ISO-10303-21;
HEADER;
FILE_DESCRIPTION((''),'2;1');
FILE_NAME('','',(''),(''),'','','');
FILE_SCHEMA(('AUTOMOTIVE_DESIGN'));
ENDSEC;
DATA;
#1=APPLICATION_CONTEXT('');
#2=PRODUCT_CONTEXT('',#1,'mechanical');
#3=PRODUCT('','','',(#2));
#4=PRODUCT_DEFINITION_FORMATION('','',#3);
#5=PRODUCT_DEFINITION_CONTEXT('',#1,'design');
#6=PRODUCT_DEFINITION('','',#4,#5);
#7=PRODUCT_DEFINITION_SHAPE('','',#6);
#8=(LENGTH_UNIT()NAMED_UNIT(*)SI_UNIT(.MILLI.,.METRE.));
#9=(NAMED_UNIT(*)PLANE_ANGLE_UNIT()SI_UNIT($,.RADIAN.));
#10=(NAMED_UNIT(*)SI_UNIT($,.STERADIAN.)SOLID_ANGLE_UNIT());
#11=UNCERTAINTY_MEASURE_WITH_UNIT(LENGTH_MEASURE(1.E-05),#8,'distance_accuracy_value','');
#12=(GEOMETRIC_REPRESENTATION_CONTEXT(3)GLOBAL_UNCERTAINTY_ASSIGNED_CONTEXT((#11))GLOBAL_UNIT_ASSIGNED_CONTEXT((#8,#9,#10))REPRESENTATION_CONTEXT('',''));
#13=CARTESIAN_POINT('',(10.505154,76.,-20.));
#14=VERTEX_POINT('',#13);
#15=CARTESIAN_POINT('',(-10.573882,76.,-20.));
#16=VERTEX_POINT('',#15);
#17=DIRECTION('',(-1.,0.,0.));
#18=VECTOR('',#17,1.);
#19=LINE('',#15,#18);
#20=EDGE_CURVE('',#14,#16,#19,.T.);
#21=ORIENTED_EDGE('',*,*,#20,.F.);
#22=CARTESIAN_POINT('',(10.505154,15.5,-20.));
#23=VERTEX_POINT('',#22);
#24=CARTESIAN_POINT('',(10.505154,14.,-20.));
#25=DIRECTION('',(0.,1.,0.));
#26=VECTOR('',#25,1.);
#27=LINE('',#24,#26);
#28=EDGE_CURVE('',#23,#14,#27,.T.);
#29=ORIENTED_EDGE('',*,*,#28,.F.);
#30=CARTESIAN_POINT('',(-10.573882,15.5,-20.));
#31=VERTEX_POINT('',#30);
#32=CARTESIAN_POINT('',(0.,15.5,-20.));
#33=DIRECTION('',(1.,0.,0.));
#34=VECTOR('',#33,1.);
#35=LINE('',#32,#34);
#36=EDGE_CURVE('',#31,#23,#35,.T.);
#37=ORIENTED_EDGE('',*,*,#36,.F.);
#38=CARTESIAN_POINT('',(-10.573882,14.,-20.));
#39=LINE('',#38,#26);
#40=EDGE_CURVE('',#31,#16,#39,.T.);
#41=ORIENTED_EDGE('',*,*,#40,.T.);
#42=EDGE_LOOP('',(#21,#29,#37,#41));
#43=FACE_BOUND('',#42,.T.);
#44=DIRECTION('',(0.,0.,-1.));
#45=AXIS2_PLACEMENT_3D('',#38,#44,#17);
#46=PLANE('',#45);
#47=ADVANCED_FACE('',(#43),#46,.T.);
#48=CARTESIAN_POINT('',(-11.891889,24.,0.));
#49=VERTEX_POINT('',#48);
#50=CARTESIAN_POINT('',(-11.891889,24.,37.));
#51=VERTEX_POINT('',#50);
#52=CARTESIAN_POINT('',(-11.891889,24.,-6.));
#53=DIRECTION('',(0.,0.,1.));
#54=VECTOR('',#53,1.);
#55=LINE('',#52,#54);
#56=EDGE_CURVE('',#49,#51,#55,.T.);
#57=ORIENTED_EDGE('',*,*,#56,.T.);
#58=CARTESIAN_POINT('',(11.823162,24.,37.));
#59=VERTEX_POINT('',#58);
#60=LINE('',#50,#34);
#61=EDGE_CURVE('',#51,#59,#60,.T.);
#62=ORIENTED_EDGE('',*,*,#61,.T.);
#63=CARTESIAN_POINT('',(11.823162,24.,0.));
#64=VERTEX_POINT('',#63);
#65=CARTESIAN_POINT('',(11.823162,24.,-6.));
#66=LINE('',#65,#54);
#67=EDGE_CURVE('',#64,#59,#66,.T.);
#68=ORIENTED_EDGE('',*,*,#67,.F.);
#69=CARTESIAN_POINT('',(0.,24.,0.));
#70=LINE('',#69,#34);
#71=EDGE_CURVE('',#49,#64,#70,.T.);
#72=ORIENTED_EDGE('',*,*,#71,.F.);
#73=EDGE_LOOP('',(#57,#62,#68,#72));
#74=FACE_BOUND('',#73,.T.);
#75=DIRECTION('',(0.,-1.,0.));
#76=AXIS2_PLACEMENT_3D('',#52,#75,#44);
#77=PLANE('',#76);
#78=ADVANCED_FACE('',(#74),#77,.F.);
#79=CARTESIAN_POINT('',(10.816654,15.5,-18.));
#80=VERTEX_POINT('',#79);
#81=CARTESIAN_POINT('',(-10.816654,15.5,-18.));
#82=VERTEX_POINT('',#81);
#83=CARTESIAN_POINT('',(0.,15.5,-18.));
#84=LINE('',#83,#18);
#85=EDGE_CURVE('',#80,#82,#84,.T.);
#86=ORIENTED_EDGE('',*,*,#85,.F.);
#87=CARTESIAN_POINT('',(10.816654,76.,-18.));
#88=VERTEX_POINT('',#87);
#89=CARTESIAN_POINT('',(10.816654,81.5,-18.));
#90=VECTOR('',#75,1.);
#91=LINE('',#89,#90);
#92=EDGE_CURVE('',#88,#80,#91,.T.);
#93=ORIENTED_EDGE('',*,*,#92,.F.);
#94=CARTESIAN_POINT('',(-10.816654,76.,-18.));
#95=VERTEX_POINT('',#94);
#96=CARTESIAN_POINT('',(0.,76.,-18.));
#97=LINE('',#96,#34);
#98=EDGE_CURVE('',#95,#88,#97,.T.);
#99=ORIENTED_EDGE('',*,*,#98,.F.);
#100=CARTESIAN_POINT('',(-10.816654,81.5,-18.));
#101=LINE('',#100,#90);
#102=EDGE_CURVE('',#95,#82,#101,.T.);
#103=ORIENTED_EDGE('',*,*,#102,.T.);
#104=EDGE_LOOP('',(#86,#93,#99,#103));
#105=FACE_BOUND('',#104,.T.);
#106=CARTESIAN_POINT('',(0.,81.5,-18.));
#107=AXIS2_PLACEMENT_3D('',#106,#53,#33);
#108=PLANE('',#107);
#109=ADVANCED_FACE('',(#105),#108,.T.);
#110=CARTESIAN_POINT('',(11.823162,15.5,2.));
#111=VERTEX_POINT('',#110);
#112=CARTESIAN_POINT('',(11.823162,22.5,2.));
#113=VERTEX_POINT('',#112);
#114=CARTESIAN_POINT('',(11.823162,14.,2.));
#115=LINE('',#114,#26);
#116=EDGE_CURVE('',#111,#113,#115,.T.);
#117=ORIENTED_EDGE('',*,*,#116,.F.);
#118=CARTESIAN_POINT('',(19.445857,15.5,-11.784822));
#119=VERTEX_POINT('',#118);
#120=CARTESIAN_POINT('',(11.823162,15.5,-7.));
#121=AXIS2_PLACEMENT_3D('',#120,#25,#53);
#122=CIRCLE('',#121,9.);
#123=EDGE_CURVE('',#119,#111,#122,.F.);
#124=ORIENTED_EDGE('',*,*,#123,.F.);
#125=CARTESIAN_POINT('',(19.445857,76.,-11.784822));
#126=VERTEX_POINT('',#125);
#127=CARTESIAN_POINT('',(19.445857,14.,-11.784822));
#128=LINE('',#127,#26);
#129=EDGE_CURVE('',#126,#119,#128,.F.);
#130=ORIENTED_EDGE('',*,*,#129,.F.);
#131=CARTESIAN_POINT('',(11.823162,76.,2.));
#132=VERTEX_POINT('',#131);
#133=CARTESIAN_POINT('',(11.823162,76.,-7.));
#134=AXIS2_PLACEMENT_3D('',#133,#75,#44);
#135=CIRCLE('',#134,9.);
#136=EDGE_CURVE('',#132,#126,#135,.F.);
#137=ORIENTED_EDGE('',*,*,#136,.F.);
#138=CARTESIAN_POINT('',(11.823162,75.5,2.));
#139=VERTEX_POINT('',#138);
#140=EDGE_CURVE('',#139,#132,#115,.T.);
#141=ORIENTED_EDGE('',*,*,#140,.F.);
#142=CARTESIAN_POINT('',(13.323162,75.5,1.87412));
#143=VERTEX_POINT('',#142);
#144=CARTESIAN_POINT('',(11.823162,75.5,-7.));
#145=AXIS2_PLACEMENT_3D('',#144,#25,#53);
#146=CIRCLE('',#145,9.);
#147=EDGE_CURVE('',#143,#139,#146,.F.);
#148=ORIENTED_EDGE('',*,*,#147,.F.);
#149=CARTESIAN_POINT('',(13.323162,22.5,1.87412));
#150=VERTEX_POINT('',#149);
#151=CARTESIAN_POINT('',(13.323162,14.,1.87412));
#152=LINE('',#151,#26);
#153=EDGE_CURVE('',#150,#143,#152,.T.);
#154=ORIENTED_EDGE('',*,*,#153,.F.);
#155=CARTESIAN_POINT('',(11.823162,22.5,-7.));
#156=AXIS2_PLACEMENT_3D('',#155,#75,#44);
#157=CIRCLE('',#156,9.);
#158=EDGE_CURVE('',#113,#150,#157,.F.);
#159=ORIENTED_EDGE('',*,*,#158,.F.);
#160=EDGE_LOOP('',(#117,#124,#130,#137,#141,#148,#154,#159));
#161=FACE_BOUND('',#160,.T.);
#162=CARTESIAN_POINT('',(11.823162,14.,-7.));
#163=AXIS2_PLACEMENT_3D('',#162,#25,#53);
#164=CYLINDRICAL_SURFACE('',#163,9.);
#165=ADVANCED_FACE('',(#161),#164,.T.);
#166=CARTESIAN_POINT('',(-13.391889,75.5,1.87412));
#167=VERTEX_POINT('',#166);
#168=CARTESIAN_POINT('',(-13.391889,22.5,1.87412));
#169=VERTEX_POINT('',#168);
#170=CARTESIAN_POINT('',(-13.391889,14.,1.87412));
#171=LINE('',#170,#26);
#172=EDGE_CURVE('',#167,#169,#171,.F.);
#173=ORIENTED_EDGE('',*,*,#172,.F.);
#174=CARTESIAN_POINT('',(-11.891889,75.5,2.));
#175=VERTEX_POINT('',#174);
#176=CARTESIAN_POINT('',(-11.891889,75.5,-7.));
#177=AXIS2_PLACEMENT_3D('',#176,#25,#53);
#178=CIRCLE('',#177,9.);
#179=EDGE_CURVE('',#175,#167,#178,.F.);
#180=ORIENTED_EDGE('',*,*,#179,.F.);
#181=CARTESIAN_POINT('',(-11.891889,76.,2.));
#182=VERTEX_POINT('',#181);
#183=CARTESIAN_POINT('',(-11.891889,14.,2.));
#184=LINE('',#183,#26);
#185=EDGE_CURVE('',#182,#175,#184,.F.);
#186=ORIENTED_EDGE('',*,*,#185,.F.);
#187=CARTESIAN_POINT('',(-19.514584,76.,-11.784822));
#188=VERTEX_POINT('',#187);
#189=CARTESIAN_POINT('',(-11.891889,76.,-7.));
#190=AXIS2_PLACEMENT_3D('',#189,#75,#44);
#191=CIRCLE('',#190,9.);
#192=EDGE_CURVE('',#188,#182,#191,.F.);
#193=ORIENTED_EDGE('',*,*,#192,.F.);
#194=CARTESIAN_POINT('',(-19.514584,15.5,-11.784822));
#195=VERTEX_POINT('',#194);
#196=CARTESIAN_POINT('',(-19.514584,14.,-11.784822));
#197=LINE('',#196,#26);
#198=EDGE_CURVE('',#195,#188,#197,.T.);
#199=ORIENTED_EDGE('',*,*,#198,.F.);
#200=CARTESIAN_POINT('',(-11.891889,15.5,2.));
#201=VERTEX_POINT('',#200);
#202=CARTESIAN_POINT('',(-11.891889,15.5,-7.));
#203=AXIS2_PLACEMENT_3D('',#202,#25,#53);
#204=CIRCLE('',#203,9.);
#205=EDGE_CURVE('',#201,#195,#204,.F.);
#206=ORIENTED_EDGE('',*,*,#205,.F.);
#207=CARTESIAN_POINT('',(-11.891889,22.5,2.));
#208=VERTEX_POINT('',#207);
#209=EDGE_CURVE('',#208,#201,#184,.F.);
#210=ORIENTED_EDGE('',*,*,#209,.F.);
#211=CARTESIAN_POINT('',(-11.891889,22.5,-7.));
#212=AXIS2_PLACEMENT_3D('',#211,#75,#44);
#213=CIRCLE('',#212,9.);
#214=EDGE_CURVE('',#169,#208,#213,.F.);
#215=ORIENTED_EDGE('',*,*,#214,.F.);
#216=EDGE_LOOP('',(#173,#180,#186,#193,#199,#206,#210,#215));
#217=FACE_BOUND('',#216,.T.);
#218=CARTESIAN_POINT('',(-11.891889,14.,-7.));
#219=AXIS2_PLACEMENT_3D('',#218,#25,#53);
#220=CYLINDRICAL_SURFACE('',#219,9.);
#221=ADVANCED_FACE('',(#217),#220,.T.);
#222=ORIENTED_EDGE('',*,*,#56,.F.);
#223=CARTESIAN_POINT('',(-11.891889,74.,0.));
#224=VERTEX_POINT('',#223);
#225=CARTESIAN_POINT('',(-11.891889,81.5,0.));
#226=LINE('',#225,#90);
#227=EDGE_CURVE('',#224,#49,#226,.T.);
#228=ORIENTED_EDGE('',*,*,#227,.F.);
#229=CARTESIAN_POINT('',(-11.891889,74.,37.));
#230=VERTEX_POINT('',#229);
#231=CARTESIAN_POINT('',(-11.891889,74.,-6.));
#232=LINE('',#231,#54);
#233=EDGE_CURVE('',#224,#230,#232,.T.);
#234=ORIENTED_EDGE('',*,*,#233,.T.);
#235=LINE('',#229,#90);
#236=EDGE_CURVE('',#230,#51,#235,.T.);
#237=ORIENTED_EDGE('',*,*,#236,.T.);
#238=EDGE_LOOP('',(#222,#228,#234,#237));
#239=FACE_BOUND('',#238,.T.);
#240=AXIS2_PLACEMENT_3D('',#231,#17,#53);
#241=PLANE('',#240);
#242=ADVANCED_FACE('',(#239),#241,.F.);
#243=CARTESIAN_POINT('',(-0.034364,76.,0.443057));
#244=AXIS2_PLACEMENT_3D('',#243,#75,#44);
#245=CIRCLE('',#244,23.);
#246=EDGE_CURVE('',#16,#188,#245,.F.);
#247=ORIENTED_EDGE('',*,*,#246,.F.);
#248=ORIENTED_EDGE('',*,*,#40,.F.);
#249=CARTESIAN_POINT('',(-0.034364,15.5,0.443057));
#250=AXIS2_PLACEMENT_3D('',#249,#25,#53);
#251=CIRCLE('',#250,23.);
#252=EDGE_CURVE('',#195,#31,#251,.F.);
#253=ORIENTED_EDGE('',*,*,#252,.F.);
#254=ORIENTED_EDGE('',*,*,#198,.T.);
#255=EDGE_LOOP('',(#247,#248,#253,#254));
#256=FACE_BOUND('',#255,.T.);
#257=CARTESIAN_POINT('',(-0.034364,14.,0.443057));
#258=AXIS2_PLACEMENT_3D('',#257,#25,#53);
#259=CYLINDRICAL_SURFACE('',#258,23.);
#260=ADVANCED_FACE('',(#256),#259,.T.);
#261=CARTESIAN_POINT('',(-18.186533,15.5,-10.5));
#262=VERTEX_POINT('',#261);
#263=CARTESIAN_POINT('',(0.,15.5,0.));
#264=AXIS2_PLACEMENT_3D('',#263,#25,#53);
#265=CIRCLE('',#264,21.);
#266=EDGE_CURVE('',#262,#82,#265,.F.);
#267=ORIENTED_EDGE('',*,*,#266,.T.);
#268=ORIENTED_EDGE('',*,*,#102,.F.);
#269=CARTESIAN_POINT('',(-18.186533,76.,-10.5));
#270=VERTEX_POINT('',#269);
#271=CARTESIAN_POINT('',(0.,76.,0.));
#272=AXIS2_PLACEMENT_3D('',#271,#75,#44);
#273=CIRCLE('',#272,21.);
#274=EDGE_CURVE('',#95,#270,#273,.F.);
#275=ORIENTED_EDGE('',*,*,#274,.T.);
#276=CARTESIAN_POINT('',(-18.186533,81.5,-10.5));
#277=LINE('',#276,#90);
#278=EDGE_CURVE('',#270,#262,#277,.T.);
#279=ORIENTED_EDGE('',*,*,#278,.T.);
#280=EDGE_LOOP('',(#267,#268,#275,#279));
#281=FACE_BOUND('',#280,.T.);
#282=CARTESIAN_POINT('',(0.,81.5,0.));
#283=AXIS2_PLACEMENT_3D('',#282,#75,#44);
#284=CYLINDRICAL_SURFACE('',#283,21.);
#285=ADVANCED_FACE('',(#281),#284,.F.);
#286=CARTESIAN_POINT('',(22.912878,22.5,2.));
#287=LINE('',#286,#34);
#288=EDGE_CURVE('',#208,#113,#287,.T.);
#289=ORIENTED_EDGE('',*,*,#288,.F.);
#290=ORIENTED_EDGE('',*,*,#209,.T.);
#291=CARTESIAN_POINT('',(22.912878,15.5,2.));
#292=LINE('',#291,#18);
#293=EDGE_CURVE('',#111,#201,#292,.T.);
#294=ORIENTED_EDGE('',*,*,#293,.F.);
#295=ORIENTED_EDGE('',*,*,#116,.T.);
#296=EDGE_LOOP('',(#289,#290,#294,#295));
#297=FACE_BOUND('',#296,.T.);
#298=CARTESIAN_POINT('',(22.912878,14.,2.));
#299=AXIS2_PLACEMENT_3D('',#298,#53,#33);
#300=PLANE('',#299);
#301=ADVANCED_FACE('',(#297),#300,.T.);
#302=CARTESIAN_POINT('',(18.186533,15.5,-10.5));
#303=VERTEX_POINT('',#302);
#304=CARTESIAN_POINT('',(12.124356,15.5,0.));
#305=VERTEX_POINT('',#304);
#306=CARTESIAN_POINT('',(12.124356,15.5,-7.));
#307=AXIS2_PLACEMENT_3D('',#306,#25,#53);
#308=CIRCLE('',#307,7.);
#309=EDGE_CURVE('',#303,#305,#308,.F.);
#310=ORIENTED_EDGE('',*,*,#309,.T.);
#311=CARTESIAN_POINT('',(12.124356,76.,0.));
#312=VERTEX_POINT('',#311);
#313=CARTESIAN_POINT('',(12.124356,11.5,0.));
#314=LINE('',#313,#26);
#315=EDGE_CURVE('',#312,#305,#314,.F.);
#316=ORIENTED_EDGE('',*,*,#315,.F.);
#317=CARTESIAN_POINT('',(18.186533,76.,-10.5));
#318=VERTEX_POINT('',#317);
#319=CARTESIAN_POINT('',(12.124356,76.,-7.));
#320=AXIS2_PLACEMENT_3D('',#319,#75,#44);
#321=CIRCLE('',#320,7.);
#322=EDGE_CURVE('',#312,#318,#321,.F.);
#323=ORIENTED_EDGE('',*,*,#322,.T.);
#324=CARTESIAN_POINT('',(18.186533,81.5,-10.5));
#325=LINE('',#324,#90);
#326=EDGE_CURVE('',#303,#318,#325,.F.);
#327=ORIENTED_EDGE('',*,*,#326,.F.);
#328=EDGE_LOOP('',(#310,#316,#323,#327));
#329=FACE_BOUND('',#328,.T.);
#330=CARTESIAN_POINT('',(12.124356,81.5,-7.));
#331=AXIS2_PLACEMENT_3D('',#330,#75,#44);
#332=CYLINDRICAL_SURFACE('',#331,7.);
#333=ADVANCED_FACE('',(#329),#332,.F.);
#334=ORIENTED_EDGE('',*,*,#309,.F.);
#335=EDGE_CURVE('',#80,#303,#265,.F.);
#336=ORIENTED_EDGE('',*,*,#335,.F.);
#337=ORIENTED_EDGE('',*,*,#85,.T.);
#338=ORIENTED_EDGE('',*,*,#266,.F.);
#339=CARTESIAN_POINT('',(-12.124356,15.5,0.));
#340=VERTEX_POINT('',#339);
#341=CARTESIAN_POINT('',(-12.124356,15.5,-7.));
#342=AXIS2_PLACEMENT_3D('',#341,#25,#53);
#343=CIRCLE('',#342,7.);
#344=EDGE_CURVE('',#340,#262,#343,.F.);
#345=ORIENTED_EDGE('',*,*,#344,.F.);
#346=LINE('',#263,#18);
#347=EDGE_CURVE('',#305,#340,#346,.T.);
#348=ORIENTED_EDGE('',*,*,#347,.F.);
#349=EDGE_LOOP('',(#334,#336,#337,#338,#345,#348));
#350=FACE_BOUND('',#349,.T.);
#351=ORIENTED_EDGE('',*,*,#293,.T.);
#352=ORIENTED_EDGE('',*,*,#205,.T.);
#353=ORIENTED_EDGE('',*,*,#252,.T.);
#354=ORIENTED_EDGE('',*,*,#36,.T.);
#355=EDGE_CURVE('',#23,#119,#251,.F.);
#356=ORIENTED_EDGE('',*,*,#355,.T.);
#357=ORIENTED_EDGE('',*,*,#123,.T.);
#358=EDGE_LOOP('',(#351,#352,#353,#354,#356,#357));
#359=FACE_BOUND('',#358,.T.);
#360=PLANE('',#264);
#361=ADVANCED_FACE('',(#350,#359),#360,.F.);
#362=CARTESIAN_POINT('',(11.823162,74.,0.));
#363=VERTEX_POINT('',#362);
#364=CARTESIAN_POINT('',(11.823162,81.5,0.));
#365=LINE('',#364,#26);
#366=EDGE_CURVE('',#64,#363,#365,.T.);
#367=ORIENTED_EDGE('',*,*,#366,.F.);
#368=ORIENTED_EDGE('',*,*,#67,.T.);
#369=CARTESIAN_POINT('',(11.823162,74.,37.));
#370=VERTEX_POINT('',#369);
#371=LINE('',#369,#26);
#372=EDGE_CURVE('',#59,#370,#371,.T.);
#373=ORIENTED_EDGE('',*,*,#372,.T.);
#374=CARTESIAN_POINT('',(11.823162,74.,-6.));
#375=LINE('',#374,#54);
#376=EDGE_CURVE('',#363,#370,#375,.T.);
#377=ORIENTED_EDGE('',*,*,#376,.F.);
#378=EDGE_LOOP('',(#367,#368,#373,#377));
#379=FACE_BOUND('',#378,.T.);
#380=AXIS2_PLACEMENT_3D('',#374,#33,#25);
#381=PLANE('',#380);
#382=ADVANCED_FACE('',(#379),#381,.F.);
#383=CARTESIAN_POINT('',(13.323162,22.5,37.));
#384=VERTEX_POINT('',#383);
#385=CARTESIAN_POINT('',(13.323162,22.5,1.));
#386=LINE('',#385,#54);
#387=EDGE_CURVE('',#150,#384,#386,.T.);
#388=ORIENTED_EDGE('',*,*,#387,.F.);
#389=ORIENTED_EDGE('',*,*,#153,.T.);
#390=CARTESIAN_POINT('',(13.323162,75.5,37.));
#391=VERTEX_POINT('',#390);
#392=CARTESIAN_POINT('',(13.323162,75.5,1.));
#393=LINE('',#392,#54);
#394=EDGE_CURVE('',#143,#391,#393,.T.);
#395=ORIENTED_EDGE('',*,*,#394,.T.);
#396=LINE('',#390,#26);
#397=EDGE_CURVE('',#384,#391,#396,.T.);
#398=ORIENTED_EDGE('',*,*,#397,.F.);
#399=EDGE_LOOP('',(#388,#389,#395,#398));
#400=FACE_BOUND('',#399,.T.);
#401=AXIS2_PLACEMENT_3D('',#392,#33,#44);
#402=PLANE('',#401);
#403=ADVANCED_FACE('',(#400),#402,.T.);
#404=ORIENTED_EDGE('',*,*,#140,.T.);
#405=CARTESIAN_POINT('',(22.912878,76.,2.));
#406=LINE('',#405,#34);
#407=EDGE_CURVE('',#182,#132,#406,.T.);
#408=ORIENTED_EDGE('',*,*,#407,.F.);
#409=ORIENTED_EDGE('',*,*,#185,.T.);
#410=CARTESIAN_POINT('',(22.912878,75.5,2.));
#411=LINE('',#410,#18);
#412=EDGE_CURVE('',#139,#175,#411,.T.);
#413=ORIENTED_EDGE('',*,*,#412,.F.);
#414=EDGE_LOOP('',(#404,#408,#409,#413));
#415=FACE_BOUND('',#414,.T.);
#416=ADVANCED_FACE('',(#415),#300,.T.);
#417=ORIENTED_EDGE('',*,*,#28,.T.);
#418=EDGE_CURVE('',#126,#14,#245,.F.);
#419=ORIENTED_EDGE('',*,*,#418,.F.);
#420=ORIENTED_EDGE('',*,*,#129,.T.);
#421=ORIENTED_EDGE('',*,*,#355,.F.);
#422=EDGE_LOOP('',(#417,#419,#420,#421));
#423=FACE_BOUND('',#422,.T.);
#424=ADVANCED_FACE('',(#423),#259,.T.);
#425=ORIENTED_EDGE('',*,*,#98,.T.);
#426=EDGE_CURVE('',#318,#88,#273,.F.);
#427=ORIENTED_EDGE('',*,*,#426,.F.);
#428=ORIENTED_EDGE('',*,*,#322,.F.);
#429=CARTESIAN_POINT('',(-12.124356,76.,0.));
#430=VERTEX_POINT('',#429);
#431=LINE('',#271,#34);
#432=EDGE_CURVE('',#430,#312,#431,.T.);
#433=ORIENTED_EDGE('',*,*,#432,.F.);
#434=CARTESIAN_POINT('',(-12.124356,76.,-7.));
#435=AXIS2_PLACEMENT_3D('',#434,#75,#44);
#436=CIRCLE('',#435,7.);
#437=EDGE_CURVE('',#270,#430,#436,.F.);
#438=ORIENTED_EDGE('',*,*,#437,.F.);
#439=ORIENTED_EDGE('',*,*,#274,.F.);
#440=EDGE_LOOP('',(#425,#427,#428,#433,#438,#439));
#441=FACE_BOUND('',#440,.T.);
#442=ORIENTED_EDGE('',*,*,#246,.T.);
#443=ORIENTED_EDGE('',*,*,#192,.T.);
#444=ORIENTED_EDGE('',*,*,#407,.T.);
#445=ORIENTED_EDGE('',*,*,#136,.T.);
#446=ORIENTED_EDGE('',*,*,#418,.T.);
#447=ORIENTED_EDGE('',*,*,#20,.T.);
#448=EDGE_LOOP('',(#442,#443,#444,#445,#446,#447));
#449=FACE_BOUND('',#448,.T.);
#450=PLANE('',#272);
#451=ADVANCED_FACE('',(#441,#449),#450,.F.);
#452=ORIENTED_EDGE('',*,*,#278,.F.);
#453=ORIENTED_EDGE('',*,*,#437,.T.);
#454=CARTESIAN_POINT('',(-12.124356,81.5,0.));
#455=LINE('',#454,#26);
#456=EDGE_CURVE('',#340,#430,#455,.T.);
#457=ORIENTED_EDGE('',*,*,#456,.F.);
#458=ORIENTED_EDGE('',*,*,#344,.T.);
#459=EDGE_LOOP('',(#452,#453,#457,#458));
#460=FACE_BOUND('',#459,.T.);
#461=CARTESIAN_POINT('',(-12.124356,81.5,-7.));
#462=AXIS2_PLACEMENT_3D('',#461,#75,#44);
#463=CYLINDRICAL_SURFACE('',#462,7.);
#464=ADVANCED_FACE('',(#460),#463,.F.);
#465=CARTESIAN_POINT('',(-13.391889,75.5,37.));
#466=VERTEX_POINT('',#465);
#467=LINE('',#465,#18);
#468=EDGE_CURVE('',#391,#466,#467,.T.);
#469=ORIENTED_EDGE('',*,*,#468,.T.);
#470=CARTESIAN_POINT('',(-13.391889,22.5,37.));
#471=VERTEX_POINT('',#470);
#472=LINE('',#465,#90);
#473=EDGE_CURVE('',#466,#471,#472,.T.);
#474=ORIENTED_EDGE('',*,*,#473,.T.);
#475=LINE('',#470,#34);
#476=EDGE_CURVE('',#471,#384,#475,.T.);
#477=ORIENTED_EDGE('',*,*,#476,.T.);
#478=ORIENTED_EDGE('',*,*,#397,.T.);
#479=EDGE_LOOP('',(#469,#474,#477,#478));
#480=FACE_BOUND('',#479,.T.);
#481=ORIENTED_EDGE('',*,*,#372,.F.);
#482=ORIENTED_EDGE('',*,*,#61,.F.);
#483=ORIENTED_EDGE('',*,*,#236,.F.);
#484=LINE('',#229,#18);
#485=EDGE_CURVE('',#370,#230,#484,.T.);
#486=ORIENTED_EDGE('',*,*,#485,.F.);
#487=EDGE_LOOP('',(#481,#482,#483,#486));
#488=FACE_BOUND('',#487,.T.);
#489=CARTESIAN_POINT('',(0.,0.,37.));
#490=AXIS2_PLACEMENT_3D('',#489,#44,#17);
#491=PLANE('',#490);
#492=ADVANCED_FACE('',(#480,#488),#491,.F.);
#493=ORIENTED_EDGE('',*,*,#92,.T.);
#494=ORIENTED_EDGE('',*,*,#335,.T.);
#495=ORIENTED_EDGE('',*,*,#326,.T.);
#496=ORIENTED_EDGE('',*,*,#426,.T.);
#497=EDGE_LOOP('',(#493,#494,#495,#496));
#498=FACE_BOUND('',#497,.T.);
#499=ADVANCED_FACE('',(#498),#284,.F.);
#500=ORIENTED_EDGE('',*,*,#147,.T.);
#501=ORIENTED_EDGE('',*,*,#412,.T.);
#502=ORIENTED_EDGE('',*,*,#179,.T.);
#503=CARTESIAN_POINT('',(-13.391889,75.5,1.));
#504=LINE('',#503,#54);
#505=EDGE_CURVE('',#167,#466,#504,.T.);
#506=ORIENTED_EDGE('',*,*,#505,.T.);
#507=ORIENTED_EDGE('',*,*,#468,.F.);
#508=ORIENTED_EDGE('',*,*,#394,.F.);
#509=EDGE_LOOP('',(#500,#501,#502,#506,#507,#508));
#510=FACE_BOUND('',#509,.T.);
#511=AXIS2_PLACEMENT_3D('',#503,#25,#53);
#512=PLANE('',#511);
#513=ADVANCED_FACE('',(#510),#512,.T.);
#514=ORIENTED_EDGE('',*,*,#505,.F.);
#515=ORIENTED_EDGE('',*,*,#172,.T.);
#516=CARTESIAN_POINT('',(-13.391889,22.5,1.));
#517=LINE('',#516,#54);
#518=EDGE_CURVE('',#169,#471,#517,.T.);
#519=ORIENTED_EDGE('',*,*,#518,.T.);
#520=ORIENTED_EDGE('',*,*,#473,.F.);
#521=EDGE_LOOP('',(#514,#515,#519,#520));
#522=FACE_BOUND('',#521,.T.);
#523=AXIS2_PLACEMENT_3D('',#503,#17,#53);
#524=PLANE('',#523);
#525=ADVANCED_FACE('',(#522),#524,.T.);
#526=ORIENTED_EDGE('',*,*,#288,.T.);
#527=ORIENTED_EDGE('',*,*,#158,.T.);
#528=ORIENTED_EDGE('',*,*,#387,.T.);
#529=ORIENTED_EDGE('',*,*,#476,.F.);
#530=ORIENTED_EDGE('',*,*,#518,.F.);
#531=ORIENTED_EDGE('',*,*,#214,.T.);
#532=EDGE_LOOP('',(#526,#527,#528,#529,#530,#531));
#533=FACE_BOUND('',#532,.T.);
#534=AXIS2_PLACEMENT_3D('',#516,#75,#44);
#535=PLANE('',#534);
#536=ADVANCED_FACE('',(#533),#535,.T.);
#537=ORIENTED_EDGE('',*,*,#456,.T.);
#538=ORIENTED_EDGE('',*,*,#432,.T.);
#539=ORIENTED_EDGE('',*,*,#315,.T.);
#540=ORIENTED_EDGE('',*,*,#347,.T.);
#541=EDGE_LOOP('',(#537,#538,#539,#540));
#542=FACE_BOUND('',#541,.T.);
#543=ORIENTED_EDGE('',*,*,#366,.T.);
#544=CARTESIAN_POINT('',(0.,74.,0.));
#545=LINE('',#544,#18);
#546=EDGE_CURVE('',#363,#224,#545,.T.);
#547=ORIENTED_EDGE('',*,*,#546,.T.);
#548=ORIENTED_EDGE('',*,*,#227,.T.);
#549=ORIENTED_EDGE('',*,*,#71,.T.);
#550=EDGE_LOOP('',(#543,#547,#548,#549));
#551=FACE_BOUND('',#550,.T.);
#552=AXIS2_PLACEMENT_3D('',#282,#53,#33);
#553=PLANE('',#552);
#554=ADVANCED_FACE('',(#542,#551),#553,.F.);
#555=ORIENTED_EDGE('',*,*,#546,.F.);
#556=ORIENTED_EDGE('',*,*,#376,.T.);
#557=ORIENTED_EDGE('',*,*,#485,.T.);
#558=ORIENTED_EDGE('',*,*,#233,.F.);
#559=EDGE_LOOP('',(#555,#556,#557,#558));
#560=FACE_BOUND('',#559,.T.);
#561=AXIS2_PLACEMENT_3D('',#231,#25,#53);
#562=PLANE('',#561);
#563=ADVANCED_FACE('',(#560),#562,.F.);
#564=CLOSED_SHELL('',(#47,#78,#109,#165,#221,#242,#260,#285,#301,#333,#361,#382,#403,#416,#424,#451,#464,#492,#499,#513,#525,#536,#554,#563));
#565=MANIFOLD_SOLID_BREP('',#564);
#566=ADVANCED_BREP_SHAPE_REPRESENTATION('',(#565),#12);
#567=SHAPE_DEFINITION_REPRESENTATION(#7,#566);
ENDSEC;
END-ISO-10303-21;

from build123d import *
from build123d.topology import SkipClean

# Parameters (mm, degrees)
CUT_EXTRUDE1_DEPTH           = 5
CUT_EXTRUDE3_DEPTH           = 70
SKETCH8_R                    = 43
CUT_EXTRUDE4_DEPTH           = 65
FILLET1_R                    = 7
SKETCH12_W                   = 6.5
SKETCH12_H                   = 63.5
CUT_REVOLVE1_ANGLE           = 60
CUT_REVOLVE1_OTHER_WAY_ANGLE = 60
SKETCH18_W                   = 13
SKETCH18_H                   = 8
CUT_EXTRUDE13_DEPTH          = 5
SKETCH20_W                   = 100
SKETCH20_H                   = 7
CUT_EXTRUDE15_DEPTH          = 5
SKETCH19_R                   = 1.5
CUT_EXTRUDE14_DEPTH          = 12
FILLET3_R                    = 4
SKETCH24_W                   = 2
SKETCH24_H                   = 3
BOSS_EXTRUDE3_DEPTH          = 2
CIRPATTERN2_COUNT            = 5
SKETCH26_W                   = 5
SKETCH26_H                   = 63.5
CUT_REVOLVE2_ANGLE           = 50
CUT_REVOLVE2_OTHER_WAY_ANGLE = 50
FILLET8_R                    = 9
SKETCH50_W                   = 13
SKETCH50_H                   = 5
CUT_EXTRUDE23_DEPTH          = 7
WRAP1_SECTION_W              = 14
WRAP1_SECTION_H              = 8
WRAP1_ANGLE                  = 29.893450181
SKETCH52_W                   = 21.079035893
SKETCH52_H                   = 8
BOSS_EXTRUDE11_DEPTH         = 7
BOSS_EXTRUDE12_START         = -1
SKETCH53_W                   = 3
SKETCH53_H                   = 7
BOSS_EXTRUDE12_DEPTH         = 3
SKETCH54_W                   = 1.6
SKETCH54_H                   = 7
BOSS_EXTRUDE13_DEPTH         = 16
SKETCH55_W                   = 4
SKETCH55_H                   = 7
BOSS_EXTRUDE14_DEPTH         = 6
SKETCH56_W                   = 3
SKETCH56_H                   = 7
CUT_EXTRUDE24_DEPTH          = 1
FILLET9_R                    = 2
SKETCH57_R                   = 1
CUT_EXTRUDE25_DEPTH          = 2
MIRROR6_START                = 14.3
MIRROR6_DEPTH                = 3.544129525
MIRROR6_START_2              = 19.844129625
MIRROR6_2_DEPTH              = 1.455870375
MIRROR6_START_3              = 17.844129525
MIRROR6_3_DEPTH              = 2.0000001
MIRROR6_START_4              = -10.618295229
MIRROR6_4_OUTLINE_R          = 1
MIRROR6_4_DEPTH              = 2
SKETCH61_W                   = 1.5
SKETCH61_H                   = 40.3
BOSS_EXTRUDE15_DEPTH         = 10
SKETCH63_W                   = 6.5
SKETCH63_H                   = 40.3
CUT_EXTRUDE27_DEPTH          = 10
CUT_EXTRUDE28_DEPTH          = 44
SKETCH67_W                   = 15
SKETCH67_H                   = 8
CUT_EXTRUDE29_DEPTH          = 5
SKETCH68_W                   = 23.715050839
SKETCH68_H                   = 50
CUT_EXTRUDE30_DEPTH          = 8
BOSS_EXTRUDE19_DEPTH         = 35
BOSS_EXTRUDE19_DEPTH_BACK    = 1
SKETCH69_W                   = 26.715050839
SKETCH69_H                   = 53
SKETCH69_W_2                 = 23.715050839
SKETCH69_H_2                 = 50
INTERSECT1_START             = 76
INTERSECT1_OUTLINE_R         = 45
INTERSECT1_OUTLINE_W         = 13
INTERSECT1_OUTLINE_H         = 8
INTERSECT1_DEPTH             = 10.5
INTERSECT1_2_OUTLINE_R       = 45
INTERSECT1_2_OUTLINE_W       = 13
INTERSECT1_2_OUTLINE_H       = 5
INTERSECT1_2_OUTLINE_W_2     = 15
INTERSECT1_2_OUTLINE_H_2     = 8
INTERSECT1_2_DEPTH           = 15.5
INTERSECT1_START_2           = 15.5
INTERSECT1_3_DEPTH           = 60.5
SKETCH70_W                   = 21.079035893
SKETCH70_H                   = 7
CUT_EXTRUDE31_DEPTH          = 10


with BuildPart() as part:
    # Sketch1 → Revolve1 (revolve)
    with BuildSketch(Plane.XY, mode=Mode.PRIVATE) as revolve1_sk:
        with BuildLine():
            Line((0, 86.5), (0, 11.5))
            Line((0, 11.5), (22.7, 11.5))
            Line((22.7, 11.5), (22.7, 0))
            Line((22.7, 0), (25, 0))
            Line((25, 0), (25, 11.5))
            Line((25, 11.5), (45, 11.5))
            Line((45, 11.5), (45, 81.5))
            ThreePointArc((45, 81.5), (43.535533906, 85.035533906), (40, 86.5))
            Line((40, 86.5), (0, 86.5))
        make_face()
    revolve(revolve1_sk.sketch.rotate(Axis((0, 2, 0), (0, 1, 0)), 90), axis=Axis((0, 2, 0), (0, 1, 0)))

    # Sketch5 → Cut-Extrude1 (cut)
    with BuildSketch(Plane(origin=(0, 86.5, 0), x_dir=(1, 0, 0), z_dir=(0, 1, 0))):
        with BuildLine():
            Line((-45, 0), (45, 0))
            ThreePointArc((45, 0), (0, 45), (-45, 0))
        make_face()
    extrude(amount=-CUT_EXTRUDE1_DEPTH, mode=Mode.SUBTRACT)

    # Sketch7 → Cut-Extrude3 (cut)
    with BuildSketch(Plane.XZ.offset(-11.5)):
        with BuildLine():
            Line((21, 0), (-21, 0))
            ThreePointArc((-21, 0), (-18.277714988, -10.340461055), (-10.816653826, -18))
            Line((-10.816653826, -18), (10.816653826, -18))
            ThreePointArc((10.816653826, -18), (18.277714988, -10.340461055), (21, 0))
        make_face()
    extrude(amount=-CUT_EXTRUDE3_DEPTH, mode=Mode.SUBTRACT)

    # Sketch8 → Cut-Extrude4 (cut)
    with BuildSketch(Plane(origin=(0, 79, 0), x_dir=(1, 0, 0), z_dir=(0, 1, 0))):
        with Locations(Location((0, 0, 0), (0, 0, 270))):
            Circle(SKETCH8_R)
        with BuildLine():
            Line((22.912878475, -2), (-22.981606036, -2))
            ThreePointArc((-22.981606036, -2), (-20.067855169, 10.855581536), (-10.573881727, 20))
            Line((-10.573881727, 20), (10.505154166, 20))
            ThreePointArc((10.505154166, 20), (19.999127608, 10.855581536), (22.912878475, -2))
        make_face(mode=Mode.SUBTRACT)
    extrude(amount=-CUT_EXTRUDE4_DEPTH, mode=Mode.SUBTRACT)

    # Fillet1
    fillet1_edges = [part.edges().sort_by_distance(p)[0] for p in [
        (-21, 46.5, 0),
        (21, 46.5, 0),
    ]]
    fillet(fillet1_edges, radius=FILLET1_R)

    # Sketch12 → Cut-Revolve1 (revolve, cut)
    with BuildSketch(Plane(origin=(0, 0, 0), x_dir=(0, 0, -1), z_dir=(1, 0, 0))):
        with Locations((-44.75, 47.25)):
            Rectangle(SKETCH12_W, SKETCH12_H)
    revolve(axis=Axis((0, 81.5, 0), (0, -1, 0)), revolution_arc=CUT_REVOLVE1_ANGLE, mode=Mode.SUBTRACT)

    # Sketch12 → Cut-Revolve1 other way (revolve, cut)
    with BuildSketch(Plane(origin=(0, 0, 0), x_dir=(0, 0, -1), z_dir=(1, 0, 0))):
        with Locations((-44.75, 47.25)):
            Rectangle(SKETCH12_W, SKETCH12_H)
    revolve(axis=Axis((0, 81.5, 0), (0, 1, 0)), revolution_arc=CUT_REVOLVE1_OTHER_WAY_ANGLE, mode=Mode.SUBTRACT)

    # Sketch18 → Cut-Extrude13 (cut)
    with BuildSketch(Plane(origin=(0, 81.5, 0), x_dir=(1, 0, 0), z_dir=(0, 1, 0))):
        with Locations((0, 30)):
            Rectangle(SKETCH18_W, SKETCH18_H)
    extrude(amount=-CUT_EXTRUDE13_DEPTH, mode=Mode.SUBTRACT)

    # Sketch20 → Cut-Extrude15 (cut)
    with BuildSketch(Plane(origin=(0, 86.5, 0), x_dir=(1, 0, 0), z_dir=(0, 1, 0))):
        with Locations((0, -3.5)):
            Rectangle(SKETCH20_W, SKETCH20_H)
    extrude(amount=-CUT_EXTRUDE15_DEPTH, mode=Mode.SUBTRACT)

    # Sketch19 → Cut-Extrude14 (cut)
    with BuildSketch(Plane(origin=(0, 0, 7), x_dir=(-1, 0, 0), z_dir=(0, 0, -1))):
        with Locations((0, 84)):
            Circle(SKETCH19_R)
        with Locations((-30, 84)):
            Circle(SKETCH19_R)
        with Locations((29.452221542, 84)):
            Circle(SKETCH19_R)
    extrude(amount=-CUT_EXTRUDE14_DEPTH, mode=Mode.SUBTRACT)

    # Fillet3
    fillet3_edges = [part.edges().sort_by_distance(p)[0] for p in [
        (0, 11.5, 45),
    ]]
    fillet(fillet3_edges, radius=FILLET3_R - 0.0001)  # a hair under: the kernel refuses the full size

    # Sketch24 → Boss-Extrude3 (add)
    with BuildSketch(Plane.XZ):
        with Locations((0, -22.7)):
            Rectangle(SKETCH24_W, SKETCH24_H)
    boss_extrude3 = extrude(amount=-BOSS_EXTRUDE3_DEPTH)

    # CirPattern2: Boss-Extrude3 ×5 about axis
    cirpattern2_axis = Axis((0, 0, 0), (0, 1, 0))
    for i in range(1, CIRPATTERN2_COUNT):
        add(boss_extrude3.rotate(cirpattern2_axis, i * 360 / CIRPATTERN2_COUNT))

    # Sketch26 → Cut-Revolve2 (revolve, cut)
    with BuildSketch(Plane(origin=(0, 0, 0), x_dir=(0, 0, -1), z_dir=(1, 0, 0))):
        with Locations((45.056943441, 47.25)):
            Rectangle(SKETCH26_W, SKETCH26_H)
    revolve(axis=Axis((0, 2, 0), (0, -1, 0)), revolution_arc=CUT_REVOLVE2_ANGLE, mode=Mode.SUBTRACT)

    # Sketch26 → Cut-Revolve2 other way (revolve, cut)
    with BuildSketch(Plane(origin=(0, 0, 0), x_dir=(0, 0, -1), z_dir=(1, 0, 0))):
        with Locations((45.056943441, 47.25)):
            Rectangle(SKETCH26_W, SKETCH26_H)
    revolve(axis=Axis((0, 2, 0), (0, 1, 0)), revolution_arc=CUT_REVOLVE2_OTHER_WAY_ANGLE, mode=Mode.SUBTRACT)

    # Fillet8
    fillet8_edges = [part.edges().sort_by_distance(p)[0] for p in [
        (-22.981606036, 46.5, 2),
        (22.912878475, 46.5, 2),
    ]]
    fillet(fillet8_edges, radius=FILLET8_R)

    # Sketch50 → Cut-Extrude23 (cut)
    with BuildSketch(Plane(origin=(0, 14, 0), x_dir=(1, 0, 0), z_dir=(0, 1, 0))):
        with Locations((32, 0)):
            Rectangle(SKETCH50_W, SKETCH50_H)
        with Locations((-32, 0)):
            Rectangle(SKETCH50_W, SKETCH50_H)
    extrude(amount=-CUT_EXTRUDE23_DEPTH, mode=Mode.SUBTRACT)

    # Wrap1 section (on wrap section) → Wrap1 (revolve)
    with BuildSketch(Plane(origin=(-0.03436378, 79, 0.443056559), x_dir=(0.8417807911855657, 0, -0.5398195064936087), z_dir=(0.5398195064936087, 0, 0.8417807911855657))):
        with Locations((30, -61)):
            Rectangle(WRAP1_SECTION_W, WRAP1_SECTION_H)
    wrap1 = revolve(axis=Axis((-0.03436378, 79, 0.443056559), (0, 1, 0)), revolution_arc=WRAP1_ANGLE)

    # Mirror3: Wrap1 across plane
    add(wrap1.mirror(Plane(origin=(0, 0, 0), x_dir=(0, 0, 1), z_dir=(1, 0, 0))))

    # Sketch52 → Boss-Extrude11 (add)
    with BuildSketch(Plane(origin=(0, 0, -20), x_dir=(-1, 0, 0), z_dir=(0, 0, -1))):
        with Locations((0.03436378, 18)):
            Rectangle(SKETCH52_W, SKETCH52_H)
    extrude(amount=BOSS_EXTRUDE11_DEPTH)



with BuildPart() as body_2:
    # Sketch53 → Boss-Extrude12 (new body)
    with BuildSketch(Plane(origin=(20.823161639, 0, 0), x_dir=(0, 0, -1), z_dir=(1, 0, 0)).offset(BOSS_EXTRUDE12_START)):
        with Locations((9.818295229, 17.8)):
            Rectangle(SKETCH53_W, SKETCH53_H)
    extrude(amount=BOSS_EXTRUDE12_DEPTH)


with BuildPart() as part_1:
    add(part.part)

    add(body_2.part)  # Boss-Extrude13 merges body 2
    # Sketch54 → Boss-Extrude13 (add)
    with BuildSketch(Plane(origin=(22.823161639, 0, 0), x_dir=(0, 0, -1), z_dir=(1, 0, 0))):
        with Locations((9.818295229, 17.8)):
            Rectangle(SKETCH54_W, SKETCH54_H)
    extrude(amount=BOSS_EXTRUDE13_DEPTH)

    # Sketch55 → Boss-Extrude14 (add)
    with BuildSketch(Plane.XY.offset(-9.118295229)):
        with Locations((34.823161639, 17.8)):
            Rectangle(SKETCH55_W, SKETCH55_H)
    extrude(amount=BOSS_EXTRUDE14_DEPTH)

    # Sketch56 → Cut-Extrude24 (cut)
    with BuildSketch(Plane.XY.offset(-9.018295229)):
        with Locations((25.823161639, 17.8)):
            Rectangle(SKETCH56_W, SKETCH56_H)
    extrude(amount=-CUT_EXTRUDE24_DEPTH, mode=Mode.SUBTRACT)

    # Fillet9
    # the kernel refuses this fillet: 2 mm, written as the material it takes off along each edge
    with BuildSketch(Plane(origin=(27.323161639, 25.630127019, -9.018295229), x_dir=(0, 0, -1), z_dir=(0, -1, 0))) as fillet9_piece_1_section:
        with BuildLine():
            CenterArc((2, 1.732050808), FILLET9_R, 180, 60)
            Line((0, 1.732050808), (0, 0))
            Line((0, 0), (1, 0))
        make_face()
    fillet9_piece_1 = extrude(amount=15.660254038, mode=Mode.PRIVATE)
    fillet9_piece_1 = split(fillet9_piece_1, bisect_by=Plane(origin=(27.323161639, 14, -9.018295229), z_dir=(0, 1, 0)), keep=Keep.TOP, mode=Mode.PRIVATE)
    add(fillet9_piece_1, mode=Mode.SUBTRACT)

    # Sketch57 → Cut-Extrude25 (cut)
    with BuildSketch(Plane(origin=(0, 0, -10.618295229), x_dir=(-1, 0, 0), z_dir=(0, 0, -1))):
        with Locations(Location((-36.823161639, 18.844129625, 0), (0, 0, 90))):
            Circle(SKETCH57_R)
    extrude(amount=-CUT_EXTRUDE25_DEPTH, mode=Mode.SUBTRACT)

    # Mirror6: read off the stored shape, not the designer's step
    # Mirror6 outline → Mirror6 (add)
    with BuildSketch(Plane(origin=(0, 0, 0), x_dir=(1, 0, 0), z_dir=(0, 1, 0)).offset(MIRROR6_START)):
        with BuildLine():
            Line((-32.823161639, 9.018295229), (-29.055212446, 9.018295229))
            ThreePointArc((-29.055212446, 9.018295229), (-28.055212446, 9.286244421), (-27.323161639, 10.018295229))
            Line((-27.323161639, 10.018295229), (-24.323161639, 10.018295229))
            Line((-24.323161639, 10.018295229), (-24.323161639, 9.018295229))
            Line((-24.323161639, 9.018295229), (-22.823161639, 9.018295229))
            Line((-22.823161639, 9.018295229), (-22.823161639, 8.318295229))
            Line((-22.823161639, 8.318295229), (-20.794815555, 8.318295229))
            ThreePointArc((-20.794815555, 8.318295229), (-20.436002794, 9.828095276), (-19.823161639, 11.253812113))
            Line((-19.823161639, 11.253812113), (-19.823161639, 11.318295229))
            Line((-19.823161639, 11.318295229), (-22.823161639, 11.318295229))
            Line((-22.823161639, 11.318295229), (-22.823161639, 10.618295229))
            Line((-22.823161639, 10.618295229), (-38.823161639, 10.618295229))
            Line((-38.823161639, 10.618295229), (-38.823161639, 9.018295229))
            Line((-38.823161639, 9.018295229), (-36.823161639, 9.018295229))
            Line((-36.823161639, 9.018295229), (-36.823161639, 8.618295229))
            Line((-36.823161639, 8.618295229), (-36.823161639, 3.118295229))
            Line((-36.823161639, 3.118295229), (-32.823161639, 3.118295229))
            Line((-32.823161639, 3.118295229), (-32.823161639, 9.018295229))
        make_face()
    extrude(amount=MIRROR6_DEPTH)

    # Mirror6 2 outline → Mirror6 2 (add)
    with BuildSketch(Plane(origin=(0, 0, 0), x_dir=(1, 0, 0), z_dir=(0, 1, 0)).offset(MIRROR6_START_2)):
        with BuildLine():
            Line((-32.823161639, 9.018295229), (-29.055212446, 9.018295229))
            ThreePointArc((-29.055212446, 9.018295229), (-28.055212446, 9.286244421), (-27.323161639, 10.018295229))
            Line((-27.323161639, 10.018295229), (-24.323161639, 10.018295229))
            Line((-24.323161639, 10.018295229), (-24.323161639, 9.018295229))
            Line((-24.323161639, 9.018295229), (-22.823161639, 9.018295229))
            Line((-22.823161639, 9.018295229), (-22.823161639, 8.318295229))
            Line((-22.823161639, 8.318295229), (-20.794815555, 8.318295229))
            ThreePointArc((-20.794815555, 8.318295229), (-20.436002794, 9.828095276), (-19.823161639, 11.253812113))
            Line((-19.823161639, 11.253812113), (-19.823161639, 11.318295229))
            Line((-19.823161639, 11.318295229), (-22.823161639, 11.318295229))
            Line((-22.823161639, 11.318295229), (-22.823161639, 10.618295229))
            Line((-22.823161639, 10.618295229), (-38.823161639, 10.618295229))
            Line((-38.823161639, 10.618295229), (-38.823161639, 9.018295229))
            Line((-38.823161639, 9.018295229), (-36.823161639, 9.018295229))
            Line((-36.823161639, 9.018295229), (-36.823161639, 8.618295229))
            Line((-36.823161639, 8.618295229), (-36.823161639, 3.118295229))
            Line((-36.823161639, 3.118295229), (-32.823161639, 3.118295229))
            Line((-32.823161639, 3.118295229), (-32.823161639, 9.018295229))
        make_face()
    extrude(amount=MIRROR6_2_DEPTH)

    # Mirror6 3 outline → Mirror6 3 (add)
    with BuildSketch(Plane(origin=(0, 0, 0), x_dir=(1, 0, 0), z_dir=(0, 1, 0)).offset(MIRROR6_START_3)):
        with BuildLine():
            Line((-32.823161639, 9.018295229), (-29.055212446, 9.018295229))
            ThreePointArc((-29.055212446, 9.018295229), (-28.055212446, 9.286244421), (-27.323161639, 10.018295229))
            Line((-27.323161639, 10.018295229), (-24.323161639, 10.018295229))
            Line((-24.323161639, 10.018295229), (-24.323161639, 9.018295229))
            Line((-24.323161639, 9.018295229), (-22.823161639, 9.018295229))
            Line((-22.823161639, 9.018295229), (-22.823161639, 8.318295229))
            Line((-22.823161639, 8.318295229), (-20.794815555, 8.318295229))
            ThreePointArc((-20.794815555, 8.318295229), (-20.436002794, 9.828095276), (-19.823161639, 11.253812113))
            Line((-19.823161639, 11.253812113), (-19.823161639, 11.318295229))
            Line((-19.823161639, 11.318295229), (-22.823161639, 11.318295229))
            Line((-22.823161639, 11.318295229), (-22.823161639, 10.618295229))
            Line((-22.823161639, 10.618295229), (-38.823161639, 10.618295229))
            Line((-38.823161639, 10.618295229), (-38.823161639, 9.018295229))
            Line((-38.823161639, 9.018295229), (-36.823161639, 9.018295229))
            Line((-36.823161639, 9.018295229), (-36.823161639, 8.618295229))
            Line((-36.823161639, 8.618295229), (-36.823161639, 3.118295229))
            Line((-36.823161639, 3.118295229), (-32.823161639, 3.118295229))
            Line((-32.823161639, 3.118295229), (-32.823161639, 9.018295229))
        make_face()
    extrude(amount=MIRROR6_3_DEPTH)

    # Mirror6 4 outline → Mirror6 4 (cut)
    with BuildSketch(Plane.XY.offset(MIRROR6_START_4)):
        with Locations((-36.823161639, 18.844129625)):
            Circle(MIRROR6_4_OUTLINE_R)
    extrude(amount=MIRROR6_4_DEPTH, mode=Mode.SUBTRACT)

    # Sketch61 → Boss-Extrude15 (add)
    with BuildSketch(Plane(origin=(45, 0, 0), x_dir=(0, 0, -1), z_dir=(1, 0, 0))):
        with Locations((23.675442436, 50.15)):
            Rectangle(SKETCH61_W, SKETCH61_H)
        with Locations((15.675442436, 50.15)):
            Rectangle(SKETCH61_W, SKETCH61_H)
        Polygon((24.425442436, 30), (24.425442436, 28.5), (14.925442436, 28.5), (14.925442436, 30), (16.425442436, 30), (22.925442436, 30), align=None)
        Polygon((22.925442436, 70.3), (24.425442436, 70.3), (24.425442436, 71.8), (14.925442436, 71.8), (14.925442436, 70.3), (16.425442436, 70.3), align=None)
    extrude(amount=-BOSS_EXTRUDE15_DEPTH)

    # Sketch63 → Cut-Extrude27 (cut)
    with BuildSketch(Plane(origin=(45, 0, 0), x_dir=(0, 0, -1), z_dir=(1, 0, 0))):
        with Locations((19.675442436, 50.15)):
            Rectangle(SKETCH63_W, SKETCH63_H)
    extrude(amount=-CUT_EXTRUDE27_DEPTH, mode=Mode.SUBTRACT)

    # Sketch66 → Cut-Extrude28 (cut)
    with SkipClean():  # the faces are left unmerged after this step: merging them gives an invalid solid
        with BuildSketch(Plane(origin=(0, 71.8, 0), x_dir=(1, 0, 0), z_dir=(0, 1, 0))):
            with BuildLine():
                Line((42.452693296, 14.925442436), (45, 14.925442436))
                Line((45, 14.925442436), (45, 24.425442436))
                Line((45, 24.425442436), (37.794149836, 24.425442436))
                ThreePointArc((37.794149836, 24.425442436), (40.403606994, 19.812837804), (42.452693296, 14.925442436))
            make_face()
        extrude(amount=-CUT_EXTRUDE28_DEPTH, mode=Mode.SUBTRACT)

    # Sketch67 → Cut-Extrude29 (cut)
    with SkipClean():  # the faces are left unmerged after this step: merging them gives an invalid solid
        with BuildSketch(Plane.XZ.offset(-11.5)):
            with Locations((0, 35.077013509)):
                Rectangle(SKETCH67_W, SKETCH67_H)
        extrude(amount=-CUT_EXTRUDE29_DEPTH, mode=Mode.SUBTRACT)

    # Sketch68 → Cut-Extrude30 (cut)
    with SkipClean():  # the faces are left unmerged after this step: merging them gives an invalid solid
        with BuildSketch(Plane.XY.offset(2)):
            with Locations((-0.034363781, 49)):
                Rectangle(SKETCH68_W, SKETCH68_H)
        extrude(amount=-CUT_EXTRUDE30_DEPTH, mode=Mode.SUBTRACT)

    # Sketch69 → Boss-Extrude19 (add, two sides: drawn at the far end of the back side and taken through both)
    with SkipClean():  # the faces are left unmerged after this step: merging them gives an invalid solid
        with BuildSketch(Plane.XY.offset(2).offset(-BOSS_EXTRUDE19_DEPTH_BACK)):
            with Locations((-0.034363781, 49)):
                Rectangle(SKETCH69_W, SKETCH69_H)
            with Locations((-0.034363781, 49)):
                Rectangle(SKETCH69_W_2, SKETCH69_H_2, mode=Mode.SUBTRACT)
        extrude(amount=BOSS_EXTRUDE19_DEPTH + BOSS_EXTRUDE19_DEPTH_BACK)

    # Intersect1: read off the stored shape, not the designer's step
    # Intersect1 outline → Intersect1 (cut)
    with SkipClean():  # the faces are left unmerged after this step: merging them gives an invalid solid
        with BuildSketch(Plane(origin=(0, 0, 0), x_dir=(1, 0, 0), z_dir=(0, 1, 0)).offset(INTERSECT1_START)):
            Circle(INTERSECT1_OUTLINE_R)
            with Locations((0, 30)):
                Rectangle(INTERSECT1_OUTLINE_W, INTERSECT1_OUTLINE_H, mode=Mode.SUBTRACT)
        extrude(amount=INTERSECT1_DEPTH, mode=Mode.SUBTRACT)

    # Intersect1 2 outline → Intersect1 2 (cut)
    with SkipClean():  # the faces are left unmerged after this step: merging them gives an invalid solid
        with BuildSketch(Plane(origin=(0, 0, 0), x_dir=(1, 0, 0), z_dir=(0, 1, 0))):
            Circle(INTERSECT1_2_OUTLINE_R)
            with Locations((-32, 0)):
                Rectangle(INTERSECT1_2_OUTLINE_W, INTERSECT1_2_OUTLINE_H, mode=Mode.SUBTRACT)
            with Locations((32, 0)):
                Rectangle(INTERSECT1_2_OUTLINE_W, INTERSECT1_2_OUTLINE_H, mode=Mode.SUBTRACT)
            with Locations((0, -35.077013509)):
                Rectangle(INTERSECT1_2_OUTLINE_W_2, INTERSECT1_2_OUTLINE_H_2, mode=Mode.SUBTRACT)
        extrude(amount=INTERSECT1_2_DEPTH, mode=Mode.SUBTRACT)

    # Intersect1 3 outline → Intersect1 3 (cut)
    with BuildSketch(Plane(origin=(0, 0, 0), x_dir=(1, 0, 0), z_dir=(0, 1, 0)).offset(INTERSECT1_START_2)):
        with BuildLine():
            ThreePointArc((40.326556611, 14.925442436), (42.846361448, -3.631709055), (37.239092363, -21.5))
            Line((37.239092363, -21.5), (38.97114317, -22.5))
            ThreePointArc((38.97114317, -22.5), (44.828761414, 3.922008424), (34.47199994, 28.925442436))
            Line((34.47199994, 28.925442436), (32.939911054, 27.639867217))
            ThreePointArc((32.939911054, 27.639867217), (34.202355022, 26.061444913), (35.389232286, 24.425442436))
            Line((35.389232286, 24.425442436), (35, 24.425442436))
            Line((35, 24.425442436), (35, 14.925442436))
            Line((35, 14.925442436), (40.326556611, 14.925442436))
        make_face()
        with BuildLine():
            Line((-38.97114317, -22.5), (-37.239092363, -21.5))
            ThreePointArc((-37.239092363, -21.5), (-42.836372018, 3.747696938), (-32.939911054, 27.639867217))
            Line((-32.939911054, 27.639867217), (-34.47199994, 28.925442436))
            ThreePointArc((-34.47199994, 28.925442436), (-44.828761414, 3.922008424), (-38.97114317, -22.5))
        make_face()
    extrude(amount=INTERSECT1_3_DEPTH, mode=Mode.SUBTRACT)

    # Sketch70 → Cut-Extrude31 (cut)
    with BuildSketch(Plane(origin=(0, 22, 0), x_dir=(1, 0, 0), z_dir=(0, 1, 0))):
        with BuildLine():
            Line((24.323161639, 10.018295229), (27.323161639, 10.018295229))
            ThreePointArc((27.323161639, 10.018295229), (28.055212446, 9.286244421), (29.055212446, 9.018295229))
            Line((29.055212446, 9.018295229), (32.823161639, 9.018295229))
            Line((32.823161639, 9.018295229), (32.823161639, 3.118295229))
            Line((32.823161639, 3.118295229), (36.823161639, 3.118295229))
            Line((36.823161639, 3.118295229), (36.823161639, 9.018295229))
            Line((36.823161639, 9.018295229), (38.823161639, 9.018295229))
            Line((38.823161639, 9.018295229), (38.823161639, 10.618295229))
            Line((38.823161639, 10.618295229), (22.823161639, 10.618295229))
            Line((22.823161639, 10.618295229), (22.823161639, 11.318295229))
            Line((22.823161639, 11.318295229), (19.823161639, 11.318295229))
            Line((19.823161639, 11.318295229), (19.823161639, 11.123105626))
            ThreePointArc((19.823161639, 11.123105626), (20.390189722, 9.757903156), (20.726087994, 8.318295229))
            Line((20.726087994, 8.318295229), (22.823161639, 8.318295229))
            Line((22.823161639, 8.318295229), (22.823161639, 9.018295229))
            Line((22.823161639, 9.018295229), (24.323161639, 9.018295229))
            Line((24.323161639, 9.018295229), (24.323161639, 10.018295229))
        make_face()
        with BuildLine():
            Line((-22.823161639, 8.318295229), (-20.794815555, 8.318295229))
            ThreePointArc((-20.794815555, 8.318295229), (-20.436002794, 9.828095276), (-19.823161639, 11.253812113))
            Line((-19.823161639, 11.253812113), (-19.823161639, 11.318295229))
            Line((-19.823161639, 11.318295229), (-22.823161639, 11.318295229))
            Line((-22.823161639, 11.318295229), (-22.823161639, 10.618295229))
            Line((-22.823161639, 10.618295229), (-38.823161639, 10.618295229))
            Line((-38.823161639, 10.618295229), (-38.823161639, 9.018295229))
            Line((-38.823161639, 9.018295229), (-36.823161639, 9.018295229))
            Line((-36.823161639, 9.018295229), (-36.823161639, 3.118295229))
            Line((-36.823161639, 3.118295229), (-32.823161639, 3.118295229))
            Line((-32.823161639, 3.118295229), (-32.823161639, 9.018295229))
            Line((-32.823161639, 9.018295229), (-29.055212446, 9.018295229))
            ThreePointArc((-29.055212446, 9.018295229), (-28.055212446, 9.286244421), (-27.323161639, 10.018295229))
            Line((-27.323161639, 10.018295229), (-24.323161639, 10.018295229))
            Line((-24.323161639, 10.018295229), (-24.323161639, 9.018295229))
            Line((-24.323161639, 9.018295229), (-22.823161639, 9.018295229))
            Line((-22.823161639, 9.018295229), (-22.823161639, 8.318295229))
        make_face()
        with BuildLine():
            Line((-31.111525493, 19.530265182), (-19.375269228, 12.004006408))
            ThreePointArc((-19.375269228, 12.004006408), (-15.501692684, 16.579332716), (-10.577325869, 19.998223989))
            Line((-10.577325869, 19.998223989), (-17.013204462, 32.395646477))
            ThreePointArc((-17.013204462, 32.395646477), (-24.906202488, 26.887661584), (-31.111525493, 19.530265182))
        make_face()
        with BuildLine():
            Line((17.013204462, 32.395646477), (10.562773235, 19.970191274))
            ThreePointArc((10.562773235, 19.970191274), (15.469231468, 16.546308773), (19.326594417, 11.972792091))
            Line((19.326594417, 11.972792091), (31.111525493, 19.530265182))
            ThreePointArc((31.111525493, 19.530265182), (24.906202488, 26.887661584), (17.013204462, 32.395646477))
        make_face()
        with Locations((-0.03436378, 23.5)):
            Rectangle(SKETCH70_W, SKETCH70_H)
    extrude(amount=-CUT_EXTRUDE31_DEPTH, mode=Mode.SUBTRACT)


solid = part_1.part
